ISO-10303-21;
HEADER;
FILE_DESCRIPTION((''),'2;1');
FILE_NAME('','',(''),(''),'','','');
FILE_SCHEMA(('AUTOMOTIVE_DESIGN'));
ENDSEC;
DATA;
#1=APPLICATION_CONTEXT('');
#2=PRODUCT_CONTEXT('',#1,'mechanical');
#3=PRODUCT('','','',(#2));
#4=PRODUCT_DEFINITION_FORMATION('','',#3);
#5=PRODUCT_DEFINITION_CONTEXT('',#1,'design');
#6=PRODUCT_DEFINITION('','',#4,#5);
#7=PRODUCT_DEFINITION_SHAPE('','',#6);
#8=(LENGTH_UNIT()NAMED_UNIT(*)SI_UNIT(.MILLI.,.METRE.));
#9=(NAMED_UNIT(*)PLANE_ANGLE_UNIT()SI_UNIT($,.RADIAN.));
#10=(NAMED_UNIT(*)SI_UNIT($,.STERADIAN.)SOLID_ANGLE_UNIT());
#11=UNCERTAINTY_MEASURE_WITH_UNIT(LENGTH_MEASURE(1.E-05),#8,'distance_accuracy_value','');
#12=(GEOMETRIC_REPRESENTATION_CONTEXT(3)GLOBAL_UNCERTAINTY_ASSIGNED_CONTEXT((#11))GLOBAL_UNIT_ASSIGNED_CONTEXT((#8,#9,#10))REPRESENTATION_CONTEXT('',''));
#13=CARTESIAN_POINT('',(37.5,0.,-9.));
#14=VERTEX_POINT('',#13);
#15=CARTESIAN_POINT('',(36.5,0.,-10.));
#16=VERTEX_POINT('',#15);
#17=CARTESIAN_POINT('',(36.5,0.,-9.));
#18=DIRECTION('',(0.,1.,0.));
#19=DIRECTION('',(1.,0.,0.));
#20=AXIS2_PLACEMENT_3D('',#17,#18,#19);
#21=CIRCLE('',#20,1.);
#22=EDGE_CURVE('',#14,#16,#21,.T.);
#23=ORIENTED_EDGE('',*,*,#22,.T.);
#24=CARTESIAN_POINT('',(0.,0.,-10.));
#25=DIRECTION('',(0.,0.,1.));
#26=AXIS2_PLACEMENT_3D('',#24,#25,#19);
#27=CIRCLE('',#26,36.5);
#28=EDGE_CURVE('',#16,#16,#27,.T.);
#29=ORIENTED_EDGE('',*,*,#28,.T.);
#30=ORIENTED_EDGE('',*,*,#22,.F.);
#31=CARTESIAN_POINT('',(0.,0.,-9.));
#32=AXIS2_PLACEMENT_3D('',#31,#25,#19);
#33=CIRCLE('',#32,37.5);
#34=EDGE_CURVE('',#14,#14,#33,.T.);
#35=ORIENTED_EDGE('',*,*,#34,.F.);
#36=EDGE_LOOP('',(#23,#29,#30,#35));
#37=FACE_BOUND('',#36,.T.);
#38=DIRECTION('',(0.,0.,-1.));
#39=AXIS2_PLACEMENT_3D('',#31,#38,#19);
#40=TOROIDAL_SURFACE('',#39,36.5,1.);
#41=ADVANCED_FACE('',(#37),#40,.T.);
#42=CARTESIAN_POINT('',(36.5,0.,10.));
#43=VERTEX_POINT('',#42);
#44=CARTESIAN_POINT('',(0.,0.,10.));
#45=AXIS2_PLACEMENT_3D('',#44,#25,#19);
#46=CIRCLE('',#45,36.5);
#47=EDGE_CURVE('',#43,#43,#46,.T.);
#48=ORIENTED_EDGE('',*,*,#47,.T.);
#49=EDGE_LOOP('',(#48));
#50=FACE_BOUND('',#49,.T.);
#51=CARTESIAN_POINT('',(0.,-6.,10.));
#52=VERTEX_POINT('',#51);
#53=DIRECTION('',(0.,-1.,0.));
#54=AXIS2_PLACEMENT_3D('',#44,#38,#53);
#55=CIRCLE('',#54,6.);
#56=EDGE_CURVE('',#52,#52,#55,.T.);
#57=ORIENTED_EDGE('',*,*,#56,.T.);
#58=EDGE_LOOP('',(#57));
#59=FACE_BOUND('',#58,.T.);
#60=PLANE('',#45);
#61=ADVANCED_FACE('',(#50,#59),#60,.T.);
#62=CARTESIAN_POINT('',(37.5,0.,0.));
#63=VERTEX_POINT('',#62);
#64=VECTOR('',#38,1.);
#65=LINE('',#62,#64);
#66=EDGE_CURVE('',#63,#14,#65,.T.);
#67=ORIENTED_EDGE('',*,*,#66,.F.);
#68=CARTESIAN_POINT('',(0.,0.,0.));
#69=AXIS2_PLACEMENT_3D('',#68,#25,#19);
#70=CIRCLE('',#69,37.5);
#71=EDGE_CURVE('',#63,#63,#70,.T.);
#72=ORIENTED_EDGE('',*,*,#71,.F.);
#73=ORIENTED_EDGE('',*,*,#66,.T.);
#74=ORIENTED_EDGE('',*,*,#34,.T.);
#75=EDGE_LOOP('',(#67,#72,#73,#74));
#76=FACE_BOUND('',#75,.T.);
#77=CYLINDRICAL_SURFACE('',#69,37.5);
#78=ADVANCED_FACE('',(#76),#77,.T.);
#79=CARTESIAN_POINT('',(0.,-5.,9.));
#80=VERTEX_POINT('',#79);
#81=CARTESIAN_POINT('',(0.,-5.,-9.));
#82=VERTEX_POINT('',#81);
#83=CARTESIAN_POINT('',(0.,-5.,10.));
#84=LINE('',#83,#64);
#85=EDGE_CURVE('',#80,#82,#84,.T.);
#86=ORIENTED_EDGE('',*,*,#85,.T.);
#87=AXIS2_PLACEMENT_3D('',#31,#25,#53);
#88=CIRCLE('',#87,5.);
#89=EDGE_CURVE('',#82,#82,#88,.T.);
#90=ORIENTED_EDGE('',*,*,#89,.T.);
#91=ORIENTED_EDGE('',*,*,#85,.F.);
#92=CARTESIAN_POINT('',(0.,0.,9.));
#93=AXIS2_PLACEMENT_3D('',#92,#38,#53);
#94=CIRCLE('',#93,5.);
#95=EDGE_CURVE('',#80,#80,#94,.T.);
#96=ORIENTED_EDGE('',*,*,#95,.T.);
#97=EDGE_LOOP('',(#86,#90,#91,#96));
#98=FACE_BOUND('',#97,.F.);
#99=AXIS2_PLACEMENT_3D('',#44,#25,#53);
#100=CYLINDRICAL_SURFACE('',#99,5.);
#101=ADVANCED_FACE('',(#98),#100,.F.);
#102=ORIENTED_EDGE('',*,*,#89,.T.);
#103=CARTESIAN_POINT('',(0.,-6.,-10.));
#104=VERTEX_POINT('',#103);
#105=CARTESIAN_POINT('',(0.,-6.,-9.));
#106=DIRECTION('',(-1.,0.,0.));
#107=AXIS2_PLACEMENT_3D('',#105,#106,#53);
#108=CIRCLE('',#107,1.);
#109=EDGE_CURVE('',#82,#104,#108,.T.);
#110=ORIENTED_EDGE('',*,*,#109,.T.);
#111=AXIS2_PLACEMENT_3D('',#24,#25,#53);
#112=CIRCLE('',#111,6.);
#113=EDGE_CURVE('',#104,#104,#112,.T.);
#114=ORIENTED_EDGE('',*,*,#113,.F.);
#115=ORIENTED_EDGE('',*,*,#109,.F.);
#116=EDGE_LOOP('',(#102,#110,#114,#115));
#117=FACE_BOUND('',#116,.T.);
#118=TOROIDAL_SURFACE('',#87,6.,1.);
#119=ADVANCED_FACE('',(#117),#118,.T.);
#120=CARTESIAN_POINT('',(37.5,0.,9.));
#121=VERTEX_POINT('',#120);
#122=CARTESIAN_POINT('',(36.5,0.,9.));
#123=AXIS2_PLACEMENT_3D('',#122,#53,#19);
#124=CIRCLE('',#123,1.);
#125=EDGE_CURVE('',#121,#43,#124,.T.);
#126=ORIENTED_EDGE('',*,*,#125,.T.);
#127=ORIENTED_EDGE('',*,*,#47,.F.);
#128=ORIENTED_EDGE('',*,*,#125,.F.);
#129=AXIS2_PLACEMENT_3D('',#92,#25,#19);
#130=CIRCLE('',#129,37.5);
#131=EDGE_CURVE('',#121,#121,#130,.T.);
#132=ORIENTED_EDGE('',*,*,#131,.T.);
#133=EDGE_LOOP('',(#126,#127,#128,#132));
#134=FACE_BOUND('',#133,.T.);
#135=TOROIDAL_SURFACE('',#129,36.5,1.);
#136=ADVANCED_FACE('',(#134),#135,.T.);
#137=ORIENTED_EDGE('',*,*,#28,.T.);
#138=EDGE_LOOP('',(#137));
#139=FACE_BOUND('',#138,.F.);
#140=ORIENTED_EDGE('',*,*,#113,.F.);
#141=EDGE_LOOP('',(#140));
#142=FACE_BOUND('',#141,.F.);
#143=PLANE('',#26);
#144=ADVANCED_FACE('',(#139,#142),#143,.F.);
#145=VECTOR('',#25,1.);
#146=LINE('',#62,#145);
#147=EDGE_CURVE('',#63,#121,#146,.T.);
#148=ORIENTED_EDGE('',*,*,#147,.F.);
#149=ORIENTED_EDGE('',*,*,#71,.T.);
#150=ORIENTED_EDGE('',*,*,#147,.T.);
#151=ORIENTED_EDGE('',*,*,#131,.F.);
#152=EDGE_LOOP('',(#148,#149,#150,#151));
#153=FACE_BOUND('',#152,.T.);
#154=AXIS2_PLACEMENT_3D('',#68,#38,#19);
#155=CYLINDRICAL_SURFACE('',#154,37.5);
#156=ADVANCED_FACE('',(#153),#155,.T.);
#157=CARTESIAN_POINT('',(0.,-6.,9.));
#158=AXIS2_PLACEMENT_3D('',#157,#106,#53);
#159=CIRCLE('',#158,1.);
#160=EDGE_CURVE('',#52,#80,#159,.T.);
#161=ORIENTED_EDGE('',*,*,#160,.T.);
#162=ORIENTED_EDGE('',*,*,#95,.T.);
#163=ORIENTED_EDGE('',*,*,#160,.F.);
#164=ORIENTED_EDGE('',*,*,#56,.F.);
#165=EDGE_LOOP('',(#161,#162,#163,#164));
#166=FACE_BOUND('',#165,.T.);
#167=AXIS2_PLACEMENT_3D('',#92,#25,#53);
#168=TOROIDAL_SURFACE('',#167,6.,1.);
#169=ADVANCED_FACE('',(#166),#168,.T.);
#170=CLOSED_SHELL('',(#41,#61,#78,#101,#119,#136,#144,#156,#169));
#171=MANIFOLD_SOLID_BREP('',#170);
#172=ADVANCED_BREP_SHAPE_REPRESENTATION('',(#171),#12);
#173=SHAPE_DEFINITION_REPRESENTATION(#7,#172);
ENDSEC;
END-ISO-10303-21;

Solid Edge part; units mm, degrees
sketch "Sketch1" plane through (0, 0, 0) normal (0, 0, 1) x (1, 0, 0)
  circle A0 centre (0, 0) radius 37.5
  dimension "D1" = 75
extrude "ExtrudedProtrusion_1" add sketch "Sketch1" along normal mid plane 20
fillet "Round_1" radius 1 2 edges at (-37.5, 0, 10) (-37.5, 0, -10)
hole "Hole_1" at (0, 0, 10) direction (0, 0, -1) diameter 10 end up to next
fillet "Round_2" radius 1 2 edges at (-5, 0, 10) (5, 0, -10)
properties material "Acrylic, high impact grade"
